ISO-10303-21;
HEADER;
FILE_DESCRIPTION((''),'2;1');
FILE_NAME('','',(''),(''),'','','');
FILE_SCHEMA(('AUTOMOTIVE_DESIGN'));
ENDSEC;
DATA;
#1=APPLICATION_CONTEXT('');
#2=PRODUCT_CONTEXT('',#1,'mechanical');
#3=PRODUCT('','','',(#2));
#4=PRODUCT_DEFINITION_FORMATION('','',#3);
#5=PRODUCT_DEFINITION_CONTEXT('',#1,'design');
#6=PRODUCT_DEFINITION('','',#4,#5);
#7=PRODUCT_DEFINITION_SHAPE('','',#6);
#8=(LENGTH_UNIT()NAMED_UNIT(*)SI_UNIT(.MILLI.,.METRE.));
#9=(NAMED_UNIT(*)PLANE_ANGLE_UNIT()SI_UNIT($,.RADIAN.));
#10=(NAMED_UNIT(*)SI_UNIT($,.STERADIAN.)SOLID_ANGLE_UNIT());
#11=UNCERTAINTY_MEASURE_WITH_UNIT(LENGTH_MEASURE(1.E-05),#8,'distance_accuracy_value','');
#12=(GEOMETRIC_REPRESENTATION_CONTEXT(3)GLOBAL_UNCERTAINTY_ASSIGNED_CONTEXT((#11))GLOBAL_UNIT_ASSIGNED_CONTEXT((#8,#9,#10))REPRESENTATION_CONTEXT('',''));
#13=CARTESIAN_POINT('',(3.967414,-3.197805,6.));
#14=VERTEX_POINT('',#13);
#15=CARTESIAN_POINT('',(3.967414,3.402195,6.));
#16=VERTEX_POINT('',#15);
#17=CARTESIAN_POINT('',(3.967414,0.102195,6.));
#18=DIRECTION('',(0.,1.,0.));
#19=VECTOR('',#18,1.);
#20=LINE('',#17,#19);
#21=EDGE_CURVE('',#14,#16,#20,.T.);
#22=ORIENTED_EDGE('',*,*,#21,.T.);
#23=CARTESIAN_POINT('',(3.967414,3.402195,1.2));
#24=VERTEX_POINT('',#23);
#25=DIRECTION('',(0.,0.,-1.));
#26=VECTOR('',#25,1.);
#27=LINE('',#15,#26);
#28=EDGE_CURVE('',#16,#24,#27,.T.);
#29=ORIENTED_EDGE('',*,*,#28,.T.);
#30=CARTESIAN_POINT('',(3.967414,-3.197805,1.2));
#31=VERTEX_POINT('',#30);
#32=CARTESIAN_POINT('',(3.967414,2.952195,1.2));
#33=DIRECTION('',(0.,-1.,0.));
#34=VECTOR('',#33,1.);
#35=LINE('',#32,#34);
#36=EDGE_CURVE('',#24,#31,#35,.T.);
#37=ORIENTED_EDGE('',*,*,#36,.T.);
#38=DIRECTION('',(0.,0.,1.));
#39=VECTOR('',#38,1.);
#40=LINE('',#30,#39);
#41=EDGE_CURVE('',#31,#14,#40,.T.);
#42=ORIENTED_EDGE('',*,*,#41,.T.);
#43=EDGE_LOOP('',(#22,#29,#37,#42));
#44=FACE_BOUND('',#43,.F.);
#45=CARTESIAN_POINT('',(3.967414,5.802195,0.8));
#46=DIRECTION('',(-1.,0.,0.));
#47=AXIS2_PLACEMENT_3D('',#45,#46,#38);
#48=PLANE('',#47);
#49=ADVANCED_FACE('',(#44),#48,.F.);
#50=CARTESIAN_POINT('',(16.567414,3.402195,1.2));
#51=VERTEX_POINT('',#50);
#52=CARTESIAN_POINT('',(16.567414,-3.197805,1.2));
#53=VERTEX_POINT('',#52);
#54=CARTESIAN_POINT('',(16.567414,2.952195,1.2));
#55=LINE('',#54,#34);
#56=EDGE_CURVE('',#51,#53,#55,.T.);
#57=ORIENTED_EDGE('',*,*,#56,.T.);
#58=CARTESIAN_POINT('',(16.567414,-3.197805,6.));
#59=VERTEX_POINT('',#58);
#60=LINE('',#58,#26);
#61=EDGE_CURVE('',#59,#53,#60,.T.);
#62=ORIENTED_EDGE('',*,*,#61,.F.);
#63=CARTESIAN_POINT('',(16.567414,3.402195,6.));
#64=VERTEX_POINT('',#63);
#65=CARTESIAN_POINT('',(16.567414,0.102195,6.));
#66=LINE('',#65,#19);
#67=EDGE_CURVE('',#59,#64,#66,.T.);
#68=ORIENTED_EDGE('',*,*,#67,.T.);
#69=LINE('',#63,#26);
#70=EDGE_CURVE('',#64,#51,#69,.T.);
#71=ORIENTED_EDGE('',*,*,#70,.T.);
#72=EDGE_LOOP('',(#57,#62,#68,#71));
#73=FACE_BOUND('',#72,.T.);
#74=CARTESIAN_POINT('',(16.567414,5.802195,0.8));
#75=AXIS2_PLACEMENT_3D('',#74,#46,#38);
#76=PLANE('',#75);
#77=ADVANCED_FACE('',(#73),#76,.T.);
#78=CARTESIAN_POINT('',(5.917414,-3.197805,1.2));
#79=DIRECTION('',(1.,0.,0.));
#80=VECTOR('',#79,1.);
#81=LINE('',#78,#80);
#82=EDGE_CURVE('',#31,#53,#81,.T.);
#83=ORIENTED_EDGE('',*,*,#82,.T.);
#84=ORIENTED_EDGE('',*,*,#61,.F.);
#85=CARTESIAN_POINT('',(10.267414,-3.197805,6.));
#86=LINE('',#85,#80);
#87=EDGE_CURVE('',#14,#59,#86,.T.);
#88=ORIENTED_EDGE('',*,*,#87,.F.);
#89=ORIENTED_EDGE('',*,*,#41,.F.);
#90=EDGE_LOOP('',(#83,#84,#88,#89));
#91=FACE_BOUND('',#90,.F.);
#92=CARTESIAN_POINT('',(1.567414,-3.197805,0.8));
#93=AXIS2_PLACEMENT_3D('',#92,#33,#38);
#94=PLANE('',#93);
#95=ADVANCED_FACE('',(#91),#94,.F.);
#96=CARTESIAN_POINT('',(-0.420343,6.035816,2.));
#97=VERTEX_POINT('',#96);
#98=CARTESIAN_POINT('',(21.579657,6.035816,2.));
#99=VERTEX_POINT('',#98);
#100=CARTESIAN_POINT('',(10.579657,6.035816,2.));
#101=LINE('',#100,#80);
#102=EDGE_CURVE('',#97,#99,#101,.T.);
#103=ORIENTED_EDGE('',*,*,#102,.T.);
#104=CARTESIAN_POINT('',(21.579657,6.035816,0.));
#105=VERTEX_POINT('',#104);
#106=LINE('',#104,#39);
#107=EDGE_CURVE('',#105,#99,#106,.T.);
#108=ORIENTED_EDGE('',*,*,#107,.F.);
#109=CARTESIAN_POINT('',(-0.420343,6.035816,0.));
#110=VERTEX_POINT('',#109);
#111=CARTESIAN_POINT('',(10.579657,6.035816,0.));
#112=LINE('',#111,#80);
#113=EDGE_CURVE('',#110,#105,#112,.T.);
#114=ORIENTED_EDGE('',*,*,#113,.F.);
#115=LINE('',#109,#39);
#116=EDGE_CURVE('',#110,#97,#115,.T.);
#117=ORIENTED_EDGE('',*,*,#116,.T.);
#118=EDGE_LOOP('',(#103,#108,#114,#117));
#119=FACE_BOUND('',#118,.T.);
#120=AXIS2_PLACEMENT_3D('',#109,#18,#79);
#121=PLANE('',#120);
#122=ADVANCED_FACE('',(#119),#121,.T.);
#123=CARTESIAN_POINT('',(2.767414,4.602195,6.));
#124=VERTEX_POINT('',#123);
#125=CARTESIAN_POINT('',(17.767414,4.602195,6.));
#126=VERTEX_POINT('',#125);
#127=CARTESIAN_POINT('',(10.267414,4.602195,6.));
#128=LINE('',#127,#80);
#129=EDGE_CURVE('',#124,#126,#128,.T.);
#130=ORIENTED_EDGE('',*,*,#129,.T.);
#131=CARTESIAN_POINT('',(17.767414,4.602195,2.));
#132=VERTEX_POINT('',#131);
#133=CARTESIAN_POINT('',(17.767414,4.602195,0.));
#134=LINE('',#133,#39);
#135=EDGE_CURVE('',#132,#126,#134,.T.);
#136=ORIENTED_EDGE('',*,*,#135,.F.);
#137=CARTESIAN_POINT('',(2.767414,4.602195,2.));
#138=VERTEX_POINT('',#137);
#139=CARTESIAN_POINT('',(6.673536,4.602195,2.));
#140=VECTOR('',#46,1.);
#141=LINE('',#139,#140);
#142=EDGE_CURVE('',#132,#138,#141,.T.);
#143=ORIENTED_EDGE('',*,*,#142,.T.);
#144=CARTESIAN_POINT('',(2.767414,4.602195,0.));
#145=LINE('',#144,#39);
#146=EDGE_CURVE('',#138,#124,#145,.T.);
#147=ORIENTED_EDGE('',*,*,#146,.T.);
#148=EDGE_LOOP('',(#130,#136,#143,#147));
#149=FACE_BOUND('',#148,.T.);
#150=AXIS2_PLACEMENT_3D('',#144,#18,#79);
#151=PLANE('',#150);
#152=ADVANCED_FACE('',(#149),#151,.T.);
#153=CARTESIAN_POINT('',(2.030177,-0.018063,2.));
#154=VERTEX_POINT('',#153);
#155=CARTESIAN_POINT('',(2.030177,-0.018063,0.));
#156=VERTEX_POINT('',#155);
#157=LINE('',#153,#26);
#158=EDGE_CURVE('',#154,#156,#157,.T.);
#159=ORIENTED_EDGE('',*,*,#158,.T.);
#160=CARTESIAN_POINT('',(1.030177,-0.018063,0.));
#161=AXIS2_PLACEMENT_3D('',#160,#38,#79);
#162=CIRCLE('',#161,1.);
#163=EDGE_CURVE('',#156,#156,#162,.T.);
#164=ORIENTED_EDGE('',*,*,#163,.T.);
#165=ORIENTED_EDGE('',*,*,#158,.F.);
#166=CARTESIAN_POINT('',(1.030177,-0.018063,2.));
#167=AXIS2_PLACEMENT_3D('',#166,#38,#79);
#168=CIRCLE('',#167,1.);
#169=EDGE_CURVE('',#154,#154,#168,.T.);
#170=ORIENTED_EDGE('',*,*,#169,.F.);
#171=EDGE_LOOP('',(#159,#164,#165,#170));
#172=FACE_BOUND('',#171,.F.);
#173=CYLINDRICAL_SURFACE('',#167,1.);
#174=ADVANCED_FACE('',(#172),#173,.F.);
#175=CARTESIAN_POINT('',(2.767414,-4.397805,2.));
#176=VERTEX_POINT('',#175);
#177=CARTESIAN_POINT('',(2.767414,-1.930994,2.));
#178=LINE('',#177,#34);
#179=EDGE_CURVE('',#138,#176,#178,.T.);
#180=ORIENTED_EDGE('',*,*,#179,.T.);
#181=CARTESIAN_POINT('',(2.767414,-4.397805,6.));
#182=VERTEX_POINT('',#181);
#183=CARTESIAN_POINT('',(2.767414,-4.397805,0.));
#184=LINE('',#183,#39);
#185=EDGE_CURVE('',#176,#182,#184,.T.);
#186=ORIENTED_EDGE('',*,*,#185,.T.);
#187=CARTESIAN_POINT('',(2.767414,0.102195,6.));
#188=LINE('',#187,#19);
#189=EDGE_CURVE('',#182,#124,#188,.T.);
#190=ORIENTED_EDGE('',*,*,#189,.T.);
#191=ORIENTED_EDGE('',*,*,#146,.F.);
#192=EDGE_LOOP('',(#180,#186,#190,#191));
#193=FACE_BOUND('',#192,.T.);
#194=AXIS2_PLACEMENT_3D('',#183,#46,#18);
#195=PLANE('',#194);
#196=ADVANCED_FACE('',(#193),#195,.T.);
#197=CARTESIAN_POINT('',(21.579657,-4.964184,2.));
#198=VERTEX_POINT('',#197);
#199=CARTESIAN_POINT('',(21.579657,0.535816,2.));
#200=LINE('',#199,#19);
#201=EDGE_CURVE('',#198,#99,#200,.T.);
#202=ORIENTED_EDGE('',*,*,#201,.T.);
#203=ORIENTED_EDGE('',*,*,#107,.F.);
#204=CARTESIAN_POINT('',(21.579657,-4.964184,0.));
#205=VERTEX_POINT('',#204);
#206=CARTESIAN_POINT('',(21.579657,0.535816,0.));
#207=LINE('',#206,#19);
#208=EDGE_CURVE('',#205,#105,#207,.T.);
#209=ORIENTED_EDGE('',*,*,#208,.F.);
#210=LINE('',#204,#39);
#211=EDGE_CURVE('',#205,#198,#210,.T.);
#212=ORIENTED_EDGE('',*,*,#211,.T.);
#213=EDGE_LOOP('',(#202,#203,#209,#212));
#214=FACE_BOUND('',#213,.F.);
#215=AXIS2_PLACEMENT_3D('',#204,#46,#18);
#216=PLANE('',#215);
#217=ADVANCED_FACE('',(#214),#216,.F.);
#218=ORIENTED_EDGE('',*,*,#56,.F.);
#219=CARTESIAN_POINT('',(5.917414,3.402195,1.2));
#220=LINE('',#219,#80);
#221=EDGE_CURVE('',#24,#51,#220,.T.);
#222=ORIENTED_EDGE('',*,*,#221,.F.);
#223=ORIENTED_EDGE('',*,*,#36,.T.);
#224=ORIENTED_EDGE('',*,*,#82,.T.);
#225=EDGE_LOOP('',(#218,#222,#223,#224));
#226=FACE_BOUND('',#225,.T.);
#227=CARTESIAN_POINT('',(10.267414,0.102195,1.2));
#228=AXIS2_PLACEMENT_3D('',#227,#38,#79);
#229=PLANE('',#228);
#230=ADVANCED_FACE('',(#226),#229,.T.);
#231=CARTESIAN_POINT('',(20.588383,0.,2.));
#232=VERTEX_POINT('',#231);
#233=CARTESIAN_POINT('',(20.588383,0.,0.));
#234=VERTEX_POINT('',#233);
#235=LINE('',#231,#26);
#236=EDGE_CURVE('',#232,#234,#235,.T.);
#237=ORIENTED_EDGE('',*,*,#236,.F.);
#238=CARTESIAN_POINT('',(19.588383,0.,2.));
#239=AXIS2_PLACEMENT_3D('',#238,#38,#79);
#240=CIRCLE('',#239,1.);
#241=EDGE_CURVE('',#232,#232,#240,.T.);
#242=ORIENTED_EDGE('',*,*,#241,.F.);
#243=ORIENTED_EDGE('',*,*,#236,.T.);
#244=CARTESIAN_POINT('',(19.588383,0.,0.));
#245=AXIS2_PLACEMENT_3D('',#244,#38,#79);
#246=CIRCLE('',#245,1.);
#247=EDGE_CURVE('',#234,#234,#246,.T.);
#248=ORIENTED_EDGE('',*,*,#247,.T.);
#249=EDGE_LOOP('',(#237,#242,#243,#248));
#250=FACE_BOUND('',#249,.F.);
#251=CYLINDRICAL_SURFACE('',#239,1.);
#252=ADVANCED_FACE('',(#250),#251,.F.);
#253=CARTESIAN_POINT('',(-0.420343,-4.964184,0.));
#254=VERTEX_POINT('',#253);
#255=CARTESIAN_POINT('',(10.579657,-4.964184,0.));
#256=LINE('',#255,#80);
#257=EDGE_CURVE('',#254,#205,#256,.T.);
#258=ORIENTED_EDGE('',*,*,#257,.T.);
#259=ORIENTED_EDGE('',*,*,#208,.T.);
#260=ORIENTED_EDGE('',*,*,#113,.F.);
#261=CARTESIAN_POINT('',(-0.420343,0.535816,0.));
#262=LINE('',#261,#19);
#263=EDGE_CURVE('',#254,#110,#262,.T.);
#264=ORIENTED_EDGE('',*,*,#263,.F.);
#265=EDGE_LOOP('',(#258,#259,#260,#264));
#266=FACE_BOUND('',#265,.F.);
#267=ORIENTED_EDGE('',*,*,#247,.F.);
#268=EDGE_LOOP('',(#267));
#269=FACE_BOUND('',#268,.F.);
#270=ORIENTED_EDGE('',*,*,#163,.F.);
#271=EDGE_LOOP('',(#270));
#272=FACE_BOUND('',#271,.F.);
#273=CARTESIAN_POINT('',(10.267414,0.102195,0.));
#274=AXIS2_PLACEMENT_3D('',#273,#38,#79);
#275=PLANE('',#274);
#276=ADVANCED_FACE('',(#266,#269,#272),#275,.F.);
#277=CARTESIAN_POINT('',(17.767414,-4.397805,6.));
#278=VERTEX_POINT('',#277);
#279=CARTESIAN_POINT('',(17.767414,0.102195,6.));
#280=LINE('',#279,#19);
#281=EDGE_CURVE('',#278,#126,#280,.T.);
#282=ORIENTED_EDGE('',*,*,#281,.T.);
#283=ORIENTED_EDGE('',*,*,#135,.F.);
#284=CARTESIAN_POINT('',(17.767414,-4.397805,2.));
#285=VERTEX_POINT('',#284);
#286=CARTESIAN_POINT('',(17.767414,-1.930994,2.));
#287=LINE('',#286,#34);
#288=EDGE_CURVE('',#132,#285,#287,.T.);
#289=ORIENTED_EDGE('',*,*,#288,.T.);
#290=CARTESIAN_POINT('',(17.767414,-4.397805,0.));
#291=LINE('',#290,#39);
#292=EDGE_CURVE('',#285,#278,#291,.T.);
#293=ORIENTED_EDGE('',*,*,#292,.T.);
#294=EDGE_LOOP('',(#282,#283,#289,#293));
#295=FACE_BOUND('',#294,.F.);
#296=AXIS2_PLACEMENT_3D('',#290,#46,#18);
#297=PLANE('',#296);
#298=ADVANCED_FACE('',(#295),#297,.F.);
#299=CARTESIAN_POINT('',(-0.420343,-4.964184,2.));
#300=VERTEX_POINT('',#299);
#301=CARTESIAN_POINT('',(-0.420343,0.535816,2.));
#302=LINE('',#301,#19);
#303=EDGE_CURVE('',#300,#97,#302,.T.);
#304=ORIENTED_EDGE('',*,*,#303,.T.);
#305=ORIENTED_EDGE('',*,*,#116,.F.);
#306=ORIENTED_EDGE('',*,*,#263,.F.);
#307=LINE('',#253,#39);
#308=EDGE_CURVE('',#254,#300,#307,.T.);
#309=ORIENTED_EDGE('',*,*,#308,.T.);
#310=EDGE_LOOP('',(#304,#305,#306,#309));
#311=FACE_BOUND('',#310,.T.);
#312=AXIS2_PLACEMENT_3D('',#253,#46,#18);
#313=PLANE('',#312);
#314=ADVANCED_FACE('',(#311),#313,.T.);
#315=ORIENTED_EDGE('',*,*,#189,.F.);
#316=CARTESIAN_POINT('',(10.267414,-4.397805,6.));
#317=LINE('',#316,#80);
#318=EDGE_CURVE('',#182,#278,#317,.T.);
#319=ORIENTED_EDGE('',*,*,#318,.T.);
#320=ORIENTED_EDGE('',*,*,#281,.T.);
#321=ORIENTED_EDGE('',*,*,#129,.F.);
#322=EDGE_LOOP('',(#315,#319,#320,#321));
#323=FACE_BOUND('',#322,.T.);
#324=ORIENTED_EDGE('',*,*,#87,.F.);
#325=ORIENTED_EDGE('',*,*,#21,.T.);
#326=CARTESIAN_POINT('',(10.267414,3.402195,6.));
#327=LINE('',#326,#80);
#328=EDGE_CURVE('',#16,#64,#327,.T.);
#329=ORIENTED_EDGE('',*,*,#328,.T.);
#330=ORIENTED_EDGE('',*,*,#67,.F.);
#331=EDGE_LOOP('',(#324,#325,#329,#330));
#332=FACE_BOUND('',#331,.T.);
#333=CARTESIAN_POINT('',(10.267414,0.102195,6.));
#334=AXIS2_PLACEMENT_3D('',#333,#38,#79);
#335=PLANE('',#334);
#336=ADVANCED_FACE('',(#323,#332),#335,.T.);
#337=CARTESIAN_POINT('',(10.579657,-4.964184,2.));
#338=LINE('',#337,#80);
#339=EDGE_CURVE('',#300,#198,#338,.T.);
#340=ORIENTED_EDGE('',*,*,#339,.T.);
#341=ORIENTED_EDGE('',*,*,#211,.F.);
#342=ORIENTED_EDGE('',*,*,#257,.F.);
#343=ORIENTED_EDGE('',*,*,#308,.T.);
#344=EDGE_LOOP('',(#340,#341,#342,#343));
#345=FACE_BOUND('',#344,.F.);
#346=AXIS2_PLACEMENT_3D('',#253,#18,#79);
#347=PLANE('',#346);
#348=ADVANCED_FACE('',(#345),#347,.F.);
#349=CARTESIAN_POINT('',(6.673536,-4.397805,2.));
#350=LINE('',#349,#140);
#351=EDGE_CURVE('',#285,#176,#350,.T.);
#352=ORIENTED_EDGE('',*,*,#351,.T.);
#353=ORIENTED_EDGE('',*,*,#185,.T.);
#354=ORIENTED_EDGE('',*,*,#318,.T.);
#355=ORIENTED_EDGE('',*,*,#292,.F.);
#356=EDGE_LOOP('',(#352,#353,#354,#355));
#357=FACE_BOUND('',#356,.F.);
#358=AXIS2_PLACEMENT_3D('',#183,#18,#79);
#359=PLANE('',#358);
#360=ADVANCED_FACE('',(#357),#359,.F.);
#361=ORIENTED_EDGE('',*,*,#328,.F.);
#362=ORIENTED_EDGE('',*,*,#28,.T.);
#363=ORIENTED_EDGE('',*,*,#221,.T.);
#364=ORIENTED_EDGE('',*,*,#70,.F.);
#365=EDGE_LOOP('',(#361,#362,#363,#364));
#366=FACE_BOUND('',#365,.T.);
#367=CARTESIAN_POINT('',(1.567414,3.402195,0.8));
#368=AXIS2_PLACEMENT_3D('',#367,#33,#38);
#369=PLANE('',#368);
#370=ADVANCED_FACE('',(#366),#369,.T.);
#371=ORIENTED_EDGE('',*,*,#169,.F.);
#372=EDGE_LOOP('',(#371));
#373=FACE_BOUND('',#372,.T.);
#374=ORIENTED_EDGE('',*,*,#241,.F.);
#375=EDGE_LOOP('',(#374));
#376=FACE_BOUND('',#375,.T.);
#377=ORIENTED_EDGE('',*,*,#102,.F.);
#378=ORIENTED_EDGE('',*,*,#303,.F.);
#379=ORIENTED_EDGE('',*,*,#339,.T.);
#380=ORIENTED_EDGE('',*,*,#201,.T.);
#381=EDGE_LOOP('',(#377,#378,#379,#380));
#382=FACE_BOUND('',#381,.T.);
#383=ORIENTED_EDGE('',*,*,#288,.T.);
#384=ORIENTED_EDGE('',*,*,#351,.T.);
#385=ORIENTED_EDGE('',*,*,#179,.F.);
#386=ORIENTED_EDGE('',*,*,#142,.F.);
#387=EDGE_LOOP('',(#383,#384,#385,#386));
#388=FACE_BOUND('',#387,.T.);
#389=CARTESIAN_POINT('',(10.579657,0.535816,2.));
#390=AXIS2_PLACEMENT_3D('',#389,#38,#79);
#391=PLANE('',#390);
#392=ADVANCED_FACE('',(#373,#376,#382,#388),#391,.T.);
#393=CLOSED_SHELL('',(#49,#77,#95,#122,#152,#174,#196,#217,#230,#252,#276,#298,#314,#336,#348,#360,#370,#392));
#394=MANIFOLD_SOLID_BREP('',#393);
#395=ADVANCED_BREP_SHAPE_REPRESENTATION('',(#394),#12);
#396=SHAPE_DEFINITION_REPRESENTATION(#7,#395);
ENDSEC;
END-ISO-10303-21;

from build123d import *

# Parameters (mm, degrees)
F0_W        = 22
F0_H        = 11
F1_DEPTH    = 2
F2_W        = 15
F2_H        = 9
F3_DEPTH    = 6
F4_T        = 1.2
F4_T3_DEPTH = 17.4
F4_T5_DEPTH = 11.4
F6_R        = 1
F7_DEPTH    = 25
F5_R        = 1
F8_DEPTH    = 25


# Not quite as in the source:
# - a shell that OpenCascade refuses in one call is made with other operations: the cavity is built on its own and cut out


with BuildPart() as f1:
    # F0 (on Top) → F1 (new body)
    with BuildSketch(Plane.XY):
        with Locations((10.5796571493, 0.5358164497)):
            Rectangle(F0_W, F0_H)
    extrude(amount=F1_DEPTH)

    # F2 (on Top) → F3 (join)
    with BuildSketch(Plane.XY):
        with Locations((10.2674138546, 0.1021951512)):
            Rectangle(F2_W, F2_H)
    extrude(amount=F3_DEPTH)

    # F4: shell of thickness 1.2, made by hand


with BuildPart() as f4_core1:
    # F4_t2: copy of F1
    add(f1.part)

    # the walls: a layer under each face that stays
    f4_faces = [f4_core1.faces().sort_by_distance(p)[0] for p in [
        (10.5796571493, -4.9641835503, 1),
        (-0.4203428507, 0.5358164497, 1),
        (21.5796571493, 0.5358164497, 1),
        (10.5796571493, 0.5358164497, 0),
        (17.9129904826, -3.130850217, 2),
        (10.5796571493, 6.0358164497, 1),
        (10.2674138546, -4.3978048488, 4),
        (17.7674138546, 0.1021951512, 4),
        (10.2674138546, 4.6021951512, 4),
        (2.7674138546, 0.1021951512, 4),
    ]]
    thicken(f4_faces, amount=-F4_T, mode=Mode.SUBTRACT)

    # F4_s4 → F4_t3 (cut)
    with BuildSketch(Plane.YZ.offset(1.5674138546)):
        Polygon((-4.4098048488, 2.012), (-4.3978048488, 0.8), (-3.1978048488, 0.8), (-3.1978048488, 2), align=None)
        Polygon((4.6141951512, 2.012), (4.6021951512, 0.8), (3.4021951512, 0.8), (3.4021951512, 2), align=None)
    extrude(amount=F4_T3_DEPTH, mode=Mode.SUBTRACT)

    # F4_s6 → F4_t5 (cut)
    with BuildSketch(Plane.XZ.offset(-5.8021951512)):
        Polygon((17.7794138546, 2.012), (17.7674138546, 0.8), (16.5674138546, 0.8), (16.5674138546, 2), align=None)
        Polygon((2.7554138546, 2.012), (2.7674138546, 0.8), (3.9674138546, 0.8), (3.9674138546, 2), align=None)
    extrude(amount=F4_T5_DEPTH, mode=Mode.SUBTRACT)


with BuildPart() as f1_1:
    add(f1.part)

    # what is left inside the walls is the cavity
    f4_cavity = [f4_core1.part.solids().sort_by_distance(p)[0] for p in [
        (10.267414, -0.997805, 1.212),
    ]]
    add(f4_cavity, mode=Mode.SUBTRACT)

    # F6 (on face) → F7 (cut)
    with BuildSketch(Plane.XY.offset(2)):
        with Locations((19.5883829147, 0)):
            Circle(F6_R)
    extrude(amount=-F7_DEPTH, mode=Mode.SUBTRACT)

    # F5 (on face) → F8 (cut)
    with BuildSketch(Plane.XY.offset(2)):
        with Locations((1.0301771374, -0.018063417)):
            Circle(F5_R)
    extrude(amount=-F8_DEPTH, mode=Mode.SUBTRACT)


solid = f1_1.part
